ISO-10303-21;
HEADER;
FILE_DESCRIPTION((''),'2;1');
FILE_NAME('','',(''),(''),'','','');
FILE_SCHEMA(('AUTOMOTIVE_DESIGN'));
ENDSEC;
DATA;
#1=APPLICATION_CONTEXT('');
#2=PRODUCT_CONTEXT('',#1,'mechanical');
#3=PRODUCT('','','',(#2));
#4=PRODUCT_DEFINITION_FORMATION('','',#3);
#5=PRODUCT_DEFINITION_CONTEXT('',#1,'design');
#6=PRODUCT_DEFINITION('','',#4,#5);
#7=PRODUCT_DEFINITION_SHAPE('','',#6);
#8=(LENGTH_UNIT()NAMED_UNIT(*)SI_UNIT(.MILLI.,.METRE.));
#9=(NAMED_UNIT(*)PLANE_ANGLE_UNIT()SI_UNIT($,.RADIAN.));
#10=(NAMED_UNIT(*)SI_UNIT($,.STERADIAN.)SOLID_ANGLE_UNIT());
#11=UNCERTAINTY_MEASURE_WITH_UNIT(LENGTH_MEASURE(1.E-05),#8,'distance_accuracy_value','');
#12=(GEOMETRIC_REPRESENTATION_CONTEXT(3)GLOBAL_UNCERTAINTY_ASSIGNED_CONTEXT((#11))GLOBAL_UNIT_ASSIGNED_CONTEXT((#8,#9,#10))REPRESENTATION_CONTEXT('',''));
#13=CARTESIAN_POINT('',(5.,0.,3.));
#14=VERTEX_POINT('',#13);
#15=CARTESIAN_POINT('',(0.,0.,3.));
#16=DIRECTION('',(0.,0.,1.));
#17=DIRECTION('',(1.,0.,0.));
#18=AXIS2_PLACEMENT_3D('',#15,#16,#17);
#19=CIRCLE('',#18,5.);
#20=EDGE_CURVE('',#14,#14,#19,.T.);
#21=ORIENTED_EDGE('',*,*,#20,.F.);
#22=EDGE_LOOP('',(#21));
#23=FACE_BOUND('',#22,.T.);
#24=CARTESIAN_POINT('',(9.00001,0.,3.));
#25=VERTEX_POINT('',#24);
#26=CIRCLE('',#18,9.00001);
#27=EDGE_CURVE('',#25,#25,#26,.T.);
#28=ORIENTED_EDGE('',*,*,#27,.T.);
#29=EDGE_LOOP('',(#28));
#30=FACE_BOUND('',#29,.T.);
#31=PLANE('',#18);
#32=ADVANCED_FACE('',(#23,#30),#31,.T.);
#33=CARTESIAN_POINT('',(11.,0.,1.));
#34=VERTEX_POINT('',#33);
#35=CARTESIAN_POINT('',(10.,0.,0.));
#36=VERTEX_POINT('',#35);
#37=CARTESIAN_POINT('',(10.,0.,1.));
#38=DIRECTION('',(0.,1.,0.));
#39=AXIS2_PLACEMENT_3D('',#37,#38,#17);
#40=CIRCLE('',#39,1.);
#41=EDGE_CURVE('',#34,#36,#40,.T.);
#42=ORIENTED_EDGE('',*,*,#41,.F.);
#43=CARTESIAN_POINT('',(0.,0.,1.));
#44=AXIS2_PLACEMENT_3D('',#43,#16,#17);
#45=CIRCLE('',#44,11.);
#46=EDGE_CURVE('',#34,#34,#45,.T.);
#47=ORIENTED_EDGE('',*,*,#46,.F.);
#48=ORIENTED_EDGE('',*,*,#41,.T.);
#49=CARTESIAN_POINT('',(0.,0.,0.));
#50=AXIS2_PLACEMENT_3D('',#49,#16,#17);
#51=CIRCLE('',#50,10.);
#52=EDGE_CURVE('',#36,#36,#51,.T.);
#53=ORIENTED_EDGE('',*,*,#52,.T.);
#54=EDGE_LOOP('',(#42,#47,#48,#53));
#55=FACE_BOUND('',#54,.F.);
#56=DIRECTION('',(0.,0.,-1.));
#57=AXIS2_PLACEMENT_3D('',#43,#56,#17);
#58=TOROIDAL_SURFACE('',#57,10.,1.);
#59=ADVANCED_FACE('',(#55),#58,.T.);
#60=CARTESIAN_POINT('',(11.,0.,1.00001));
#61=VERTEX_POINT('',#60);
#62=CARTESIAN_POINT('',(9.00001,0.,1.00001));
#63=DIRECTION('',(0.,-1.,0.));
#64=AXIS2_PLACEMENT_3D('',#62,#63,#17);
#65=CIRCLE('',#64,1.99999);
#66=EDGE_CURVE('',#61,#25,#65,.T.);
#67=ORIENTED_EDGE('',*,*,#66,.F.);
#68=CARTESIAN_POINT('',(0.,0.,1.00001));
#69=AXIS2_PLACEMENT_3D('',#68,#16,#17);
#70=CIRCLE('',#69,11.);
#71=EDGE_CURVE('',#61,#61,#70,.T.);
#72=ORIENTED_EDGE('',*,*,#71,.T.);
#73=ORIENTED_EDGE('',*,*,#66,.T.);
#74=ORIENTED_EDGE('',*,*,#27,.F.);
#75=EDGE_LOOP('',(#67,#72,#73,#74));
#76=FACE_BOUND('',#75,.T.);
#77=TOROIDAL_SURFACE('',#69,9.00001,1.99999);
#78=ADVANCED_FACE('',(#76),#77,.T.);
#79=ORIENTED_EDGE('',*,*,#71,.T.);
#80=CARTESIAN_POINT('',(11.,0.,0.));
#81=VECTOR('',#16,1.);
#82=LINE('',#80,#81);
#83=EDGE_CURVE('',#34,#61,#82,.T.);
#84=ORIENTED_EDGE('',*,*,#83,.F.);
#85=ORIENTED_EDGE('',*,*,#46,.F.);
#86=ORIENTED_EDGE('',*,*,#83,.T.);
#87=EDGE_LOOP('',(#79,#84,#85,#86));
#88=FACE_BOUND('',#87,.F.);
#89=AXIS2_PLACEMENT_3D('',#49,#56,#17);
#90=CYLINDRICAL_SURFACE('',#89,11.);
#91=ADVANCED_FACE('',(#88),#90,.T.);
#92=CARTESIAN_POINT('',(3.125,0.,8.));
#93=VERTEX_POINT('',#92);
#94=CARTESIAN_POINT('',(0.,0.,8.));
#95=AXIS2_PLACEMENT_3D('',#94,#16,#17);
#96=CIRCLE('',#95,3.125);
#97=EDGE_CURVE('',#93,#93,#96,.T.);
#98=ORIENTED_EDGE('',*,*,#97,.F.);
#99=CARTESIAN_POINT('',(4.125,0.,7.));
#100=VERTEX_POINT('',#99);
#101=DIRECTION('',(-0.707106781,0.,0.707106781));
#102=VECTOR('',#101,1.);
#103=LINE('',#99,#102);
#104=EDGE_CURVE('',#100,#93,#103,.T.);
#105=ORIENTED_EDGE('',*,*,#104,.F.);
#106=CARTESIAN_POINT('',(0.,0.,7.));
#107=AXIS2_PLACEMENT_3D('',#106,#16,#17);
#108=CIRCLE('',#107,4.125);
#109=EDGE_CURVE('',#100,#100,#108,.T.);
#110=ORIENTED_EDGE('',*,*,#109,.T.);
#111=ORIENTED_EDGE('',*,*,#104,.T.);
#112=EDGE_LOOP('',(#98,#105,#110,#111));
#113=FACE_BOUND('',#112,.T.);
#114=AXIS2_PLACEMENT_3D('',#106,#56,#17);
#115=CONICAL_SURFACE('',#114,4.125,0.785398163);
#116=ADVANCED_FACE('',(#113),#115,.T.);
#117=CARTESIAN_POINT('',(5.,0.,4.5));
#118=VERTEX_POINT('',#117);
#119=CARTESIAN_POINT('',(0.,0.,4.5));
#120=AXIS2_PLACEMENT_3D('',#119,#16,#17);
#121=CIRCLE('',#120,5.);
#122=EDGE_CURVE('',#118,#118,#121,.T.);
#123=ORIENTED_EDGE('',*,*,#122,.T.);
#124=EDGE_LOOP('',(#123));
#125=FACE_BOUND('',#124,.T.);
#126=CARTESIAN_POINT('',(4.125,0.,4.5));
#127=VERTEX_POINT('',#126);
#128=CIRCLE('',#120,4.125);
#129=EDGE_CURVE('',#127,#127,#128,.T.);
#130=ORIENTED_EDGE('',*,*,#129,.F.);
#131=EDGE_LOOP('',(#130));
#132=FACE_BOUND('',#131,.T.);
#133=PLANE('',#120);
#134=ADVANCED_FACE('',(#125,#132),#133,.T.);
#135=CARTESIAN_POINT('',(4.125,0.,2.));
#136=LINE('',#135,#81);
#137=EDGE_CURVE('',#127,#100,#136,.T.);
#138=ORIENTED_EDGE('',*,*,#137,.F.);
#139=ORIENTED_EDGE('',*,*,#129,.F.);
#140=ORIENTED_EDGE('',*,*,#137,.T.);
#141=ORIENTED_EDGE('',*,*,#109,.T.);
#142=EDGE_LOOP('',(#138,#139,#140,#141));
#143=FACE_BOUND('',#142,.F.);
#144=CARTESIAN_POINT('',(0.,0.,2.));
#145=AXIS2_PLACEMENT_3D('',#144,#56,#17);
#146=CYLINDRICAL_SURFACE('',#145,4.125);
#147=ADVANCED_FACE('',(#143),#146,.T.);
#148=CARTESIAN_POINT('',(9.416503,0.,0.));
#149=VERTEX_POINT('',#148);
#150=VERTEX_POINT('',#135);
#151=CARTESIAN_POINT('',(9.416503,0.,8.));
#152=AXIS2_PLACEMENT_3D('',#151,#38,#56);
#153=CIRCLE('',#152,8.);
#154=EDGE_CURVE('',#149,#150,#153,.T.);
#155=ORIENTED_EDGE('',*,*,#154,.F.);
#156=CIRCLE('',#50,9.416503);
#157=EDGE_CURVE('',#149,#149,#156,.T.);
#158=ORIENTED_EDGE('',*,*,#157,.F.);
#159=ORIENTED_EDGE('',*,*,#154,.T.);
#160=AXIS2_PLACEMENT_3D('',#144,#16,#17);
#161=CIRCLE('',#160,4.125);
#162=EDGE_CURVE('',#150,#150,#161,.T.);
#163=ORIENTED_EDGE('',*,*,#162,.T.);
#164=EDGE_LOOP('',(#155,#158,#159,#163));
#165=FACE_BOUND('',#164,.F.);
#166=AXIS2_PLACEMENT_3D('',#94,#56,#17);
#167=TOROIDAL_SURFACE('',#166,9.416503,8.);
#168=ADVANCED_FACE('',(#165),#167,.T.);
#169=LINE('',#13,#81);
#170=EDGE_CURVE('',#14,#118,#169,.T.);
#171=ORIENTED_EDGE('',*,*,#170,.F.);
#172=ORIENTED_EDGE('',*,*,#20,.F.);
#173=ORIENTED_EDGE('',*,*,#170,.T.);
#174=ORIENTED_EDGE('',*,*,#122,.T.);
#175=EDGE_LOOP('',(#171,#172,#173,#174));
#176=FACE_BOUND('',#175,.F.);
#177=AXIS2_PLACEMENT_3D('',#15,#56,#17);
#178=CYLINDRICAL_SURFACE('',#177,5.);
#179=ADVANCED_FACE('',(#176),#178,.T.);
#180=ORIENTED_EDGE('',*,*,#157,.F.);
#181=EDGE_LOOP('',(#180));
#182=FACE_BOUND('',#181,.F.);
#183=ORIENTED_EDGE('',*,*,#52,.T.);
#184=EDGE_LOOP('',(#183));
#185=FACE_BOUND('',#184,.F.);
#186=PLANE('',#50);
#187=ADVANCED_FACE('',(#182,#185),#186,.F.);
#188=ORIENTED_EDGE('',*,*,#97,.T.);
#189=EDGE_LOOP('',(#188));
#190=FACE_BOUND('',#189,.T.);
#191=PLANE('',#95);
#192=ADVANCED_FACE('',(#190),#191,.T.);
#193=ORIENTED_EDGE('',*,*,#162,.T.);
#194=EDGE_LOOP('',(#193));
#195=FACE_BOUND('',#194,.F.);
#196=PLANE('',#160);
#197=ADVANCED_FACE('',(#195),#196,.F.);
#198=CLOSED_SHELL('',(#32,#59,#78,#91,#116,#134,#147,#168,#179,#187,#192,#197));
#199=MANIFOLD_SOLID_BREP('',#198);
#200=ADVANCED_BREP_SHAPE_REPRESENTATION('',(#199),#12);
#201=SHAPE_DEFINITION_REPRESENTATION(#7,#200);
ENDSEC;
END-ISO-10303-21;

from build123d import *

# Parameters (mm, degrees)
F1_R     = 11
F1_R_2   = 5
F1_R_3   = 4.125
F2_DEPTH = 3
F3_START = 2
F3_DEPTH = 6
F4_START = 3
F4_DEPTH = 1.5
F5_SIZE  = 1
F6_R     = 1
F7_R     = 1.99999


# Not quite as in the source:
# - a fillet or chamfer that OpenCascade refuses, or shapes differently, is made with other operations: its cross-section is extruded or revolved along the edge and cut away or added
# - a fillet or chamfer is up to 0.001 mm smaller than in the source, because OpenCascade refuses the exact size


with BuildPart() as f2:
    # F1 (on Top) → F2 (new body)
    with BuildSketch(Plane.XY):
        Circle(F1_R)
        Circle(F1_R_2, mode=Mode.SUBTRACT)
        Circle(F1_R_2)
        Circle(F1_R_3, mode=Mode.SUBTRACT)
    extrude(amount=F2_DEPTH)

    # F1 (on Top) → F3 (join)
    with BuildSketch(Plane.XY.offset(F3_START)):
        Circle(F1_R_3)
    extrude(amount=F3_DEPTH)

    # F1 (on Top) → F4 (join)
    with BuildSketch(Plane.XY.offset(F4_START)):
        Circle(F1_R_2)
        Circle(F1_R_3, mode=Mode.SUBTRACT)
    extrude(amount=F4_DEPTH)

    # F5
    f5_edges = [f2.edges().sort_by_distance(p)[0] for p in [
        (-4.125, 0, 8),
    ]]
    chamfer(f5_edges, length=F5_SIZE)

    # F6
    f6_edges = [f2.edges().sort_by_distance(p)[0] for p in [
        (-11, 0, 0),
    ]]
    fillet(f6_edges, radius=F6_R)

    # F7 (radius 2 in the source; OpenCascade refuses exactly that, so slightly less here)
    f7_edges = [f2.edges().sort_by_distance(p)[0] for p in [
        (-11, 0, 3),
    ]]
    fillet(f7_edges, radius=F7_R)

    # F8: fillet of radius 8 on 1 edges, made by hand

    # F8_s1 → F8_t2 (revolve, cut)
    with BuildSketch(Plane.XZ):
        with BuildLine():
            ThreePointArc((9.4165026221, 0), (6.5880754974, 0.5166852265), (4.125, 2))
            Line((4.125, 2), (4.0191699476, 1.88))
            ThreePointArc((4.0191699476, 1.88), (3.965, 1), (3.965, 0))
            Line((3.965, 0), (4.125, -0.16))
            Line((4.125, -0.16), (9.4165026221, -0.16))
            Line((9.4165026221, -0.16), (9.4165026221, 0))
        make_face()
    revolve(axis=Axis((0, 0, 0), (0, 0, 1)), mode=Mode.SUBTRACT)


solid = f2.part
